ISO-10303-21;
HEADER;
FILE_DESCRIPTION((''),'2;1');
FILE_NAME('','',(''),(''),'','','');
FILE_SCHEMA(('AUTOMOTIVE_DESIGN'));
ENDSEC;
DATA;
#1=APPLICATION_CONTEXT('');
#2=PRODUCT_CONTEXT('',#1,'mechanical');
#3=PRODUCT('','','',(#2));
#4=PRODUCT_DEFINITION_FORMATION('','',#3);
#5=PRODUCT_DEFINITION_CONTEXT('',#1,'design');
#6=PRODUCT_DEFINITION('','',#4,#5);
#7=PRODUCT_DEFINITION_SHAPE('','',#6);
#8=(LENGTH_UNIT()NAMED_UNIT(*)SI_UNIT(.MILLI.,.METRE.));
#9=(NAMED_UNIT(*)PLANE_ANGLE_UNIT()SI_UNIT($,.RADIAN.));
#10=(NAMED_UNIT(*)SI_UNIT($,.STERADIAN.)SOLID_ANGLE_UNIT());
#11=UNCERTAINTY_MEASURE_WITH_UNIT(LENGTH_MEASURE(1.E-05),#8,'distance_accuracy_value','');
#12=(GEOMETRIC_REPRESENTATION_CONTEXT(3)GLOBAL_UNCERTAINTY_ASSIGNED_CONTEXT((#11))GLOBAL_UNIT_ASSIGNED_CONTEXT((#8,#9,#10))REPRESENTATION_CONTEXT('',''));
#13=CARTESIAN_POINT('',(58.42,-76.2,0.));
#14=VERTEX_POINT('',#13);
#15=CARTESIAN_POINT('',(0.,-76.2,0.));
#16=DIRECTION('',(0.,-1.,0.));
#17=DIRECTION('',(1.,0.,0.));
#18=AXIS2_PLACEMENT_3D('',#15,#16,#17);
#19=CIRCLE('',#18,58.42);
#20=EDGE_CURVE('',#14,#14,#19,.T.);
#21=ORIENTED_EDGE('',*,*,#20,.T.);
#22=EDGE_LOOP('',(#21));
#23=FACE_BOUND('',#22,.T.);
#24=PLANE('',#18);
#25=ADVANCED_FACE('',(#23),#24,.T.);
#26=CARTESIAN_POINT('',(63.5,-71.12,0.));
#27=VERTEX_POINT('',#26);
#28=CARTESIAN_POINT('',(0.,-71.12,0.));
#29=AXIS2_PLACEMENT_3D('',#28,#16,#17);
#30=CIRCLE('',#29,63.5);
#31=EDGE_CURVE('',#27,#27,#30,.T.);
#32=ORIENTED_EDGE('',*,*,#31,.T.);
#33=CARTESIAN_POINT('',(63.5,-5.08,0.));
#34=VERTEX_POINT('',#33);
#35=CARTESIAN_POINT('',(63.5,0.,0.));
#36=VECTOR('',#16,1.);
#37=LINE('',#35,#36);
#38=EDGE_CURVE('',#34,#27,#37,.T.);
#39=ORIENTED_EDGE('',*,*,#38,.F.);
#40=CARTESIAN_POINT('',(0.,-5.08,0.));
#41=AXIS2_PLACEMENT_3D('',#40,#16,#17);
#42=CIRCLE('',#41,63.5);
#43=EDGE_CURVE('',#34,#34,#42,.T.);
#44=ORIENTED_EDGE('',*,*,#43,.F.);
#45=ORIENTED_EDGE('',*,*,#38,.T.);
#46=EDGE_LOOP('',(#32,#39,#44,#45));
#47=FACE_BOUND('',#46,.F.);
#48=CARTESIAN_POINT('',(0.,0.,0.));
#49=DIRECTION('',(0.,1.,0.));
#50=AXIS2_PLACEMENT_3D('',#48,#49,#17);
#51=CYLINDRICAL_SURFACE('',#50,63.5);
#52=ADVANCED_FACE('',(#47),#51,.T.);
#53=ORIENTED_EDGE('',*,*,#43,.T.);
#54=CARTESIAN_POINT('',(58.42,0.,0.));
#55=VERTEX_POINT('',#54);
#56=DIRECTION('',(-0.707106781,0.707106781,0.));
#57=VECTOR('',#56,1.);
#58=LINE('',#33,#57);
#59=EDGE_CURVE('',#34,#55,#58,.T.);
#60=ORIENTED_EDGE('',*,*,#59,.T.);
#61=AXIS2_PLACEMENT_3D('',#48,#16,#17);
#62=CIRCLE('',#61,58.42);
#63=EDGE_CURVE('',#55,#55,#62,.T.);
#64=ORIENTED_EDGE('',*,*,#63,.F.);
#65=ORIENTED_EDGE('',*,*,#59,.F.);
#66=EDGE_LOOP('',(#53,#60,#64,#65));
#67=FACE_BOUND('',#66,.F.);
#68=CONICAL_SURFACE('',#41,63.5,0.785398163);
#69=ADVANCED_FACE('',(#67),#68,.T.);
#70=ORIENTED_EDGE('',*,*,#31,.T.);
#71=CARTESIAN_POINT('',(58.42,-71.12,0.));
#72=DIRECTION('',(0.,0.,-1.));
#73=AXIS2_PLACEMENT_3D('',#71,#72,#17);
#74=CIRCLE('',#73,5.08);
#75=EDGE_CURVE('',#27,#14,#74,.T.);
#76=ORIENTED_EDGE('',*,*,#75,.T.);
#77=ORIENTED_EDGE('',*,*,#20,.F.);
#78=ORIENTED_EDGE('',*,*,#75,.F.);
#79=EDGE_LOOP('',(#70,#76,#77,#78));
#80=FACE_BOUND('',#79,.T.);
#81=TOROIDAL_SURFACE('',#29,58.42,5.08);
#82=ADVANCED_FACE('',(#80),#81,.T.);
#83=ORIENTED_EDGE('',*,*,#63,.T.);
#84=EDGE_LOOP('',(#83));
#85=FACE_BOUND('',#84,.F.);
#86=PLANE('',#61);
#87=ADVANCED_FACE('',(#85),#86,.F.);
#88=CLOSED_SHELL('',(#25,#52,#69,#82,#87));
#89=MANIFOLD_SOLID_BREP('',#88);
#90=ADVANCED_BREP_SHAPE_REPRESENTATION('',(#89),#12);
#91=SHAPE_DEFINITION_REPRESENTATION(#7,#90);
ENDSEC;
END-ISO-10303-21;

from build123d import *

# Parameters (mm, degrees)
F0_R     = 63.5
F1_DEPTH = 76.2
F6_R     = 5.08
F7_SIZE  = 5.08


# Not quite as in the source:
# - the program builds the solid bodies; features that only make, move or delete a surface that nothing else refers to are left out


with BuildPart() as f1:
    # F0 (on Front) → F1 (new body)
    with BuildSketch(Plane.XZ):
        Circle(F0_R)
    extrude(amount=F1_DEPTH)

    # F6
    f6_edges = [f1.edges().sort_by_distance(p)[0] for p in [
        (-63.5, -76.2, 0),
    ]]
    fillet(f6_edges, radius=F6_R)

    # F7
    f7_edges = [f1.edges().sort_by_distance(p)[0] for p in [
        (-63.5, 0, 0),
    ]]
    chamfer(f7_edges, length=F7_SIZE)


solid = f1.part
